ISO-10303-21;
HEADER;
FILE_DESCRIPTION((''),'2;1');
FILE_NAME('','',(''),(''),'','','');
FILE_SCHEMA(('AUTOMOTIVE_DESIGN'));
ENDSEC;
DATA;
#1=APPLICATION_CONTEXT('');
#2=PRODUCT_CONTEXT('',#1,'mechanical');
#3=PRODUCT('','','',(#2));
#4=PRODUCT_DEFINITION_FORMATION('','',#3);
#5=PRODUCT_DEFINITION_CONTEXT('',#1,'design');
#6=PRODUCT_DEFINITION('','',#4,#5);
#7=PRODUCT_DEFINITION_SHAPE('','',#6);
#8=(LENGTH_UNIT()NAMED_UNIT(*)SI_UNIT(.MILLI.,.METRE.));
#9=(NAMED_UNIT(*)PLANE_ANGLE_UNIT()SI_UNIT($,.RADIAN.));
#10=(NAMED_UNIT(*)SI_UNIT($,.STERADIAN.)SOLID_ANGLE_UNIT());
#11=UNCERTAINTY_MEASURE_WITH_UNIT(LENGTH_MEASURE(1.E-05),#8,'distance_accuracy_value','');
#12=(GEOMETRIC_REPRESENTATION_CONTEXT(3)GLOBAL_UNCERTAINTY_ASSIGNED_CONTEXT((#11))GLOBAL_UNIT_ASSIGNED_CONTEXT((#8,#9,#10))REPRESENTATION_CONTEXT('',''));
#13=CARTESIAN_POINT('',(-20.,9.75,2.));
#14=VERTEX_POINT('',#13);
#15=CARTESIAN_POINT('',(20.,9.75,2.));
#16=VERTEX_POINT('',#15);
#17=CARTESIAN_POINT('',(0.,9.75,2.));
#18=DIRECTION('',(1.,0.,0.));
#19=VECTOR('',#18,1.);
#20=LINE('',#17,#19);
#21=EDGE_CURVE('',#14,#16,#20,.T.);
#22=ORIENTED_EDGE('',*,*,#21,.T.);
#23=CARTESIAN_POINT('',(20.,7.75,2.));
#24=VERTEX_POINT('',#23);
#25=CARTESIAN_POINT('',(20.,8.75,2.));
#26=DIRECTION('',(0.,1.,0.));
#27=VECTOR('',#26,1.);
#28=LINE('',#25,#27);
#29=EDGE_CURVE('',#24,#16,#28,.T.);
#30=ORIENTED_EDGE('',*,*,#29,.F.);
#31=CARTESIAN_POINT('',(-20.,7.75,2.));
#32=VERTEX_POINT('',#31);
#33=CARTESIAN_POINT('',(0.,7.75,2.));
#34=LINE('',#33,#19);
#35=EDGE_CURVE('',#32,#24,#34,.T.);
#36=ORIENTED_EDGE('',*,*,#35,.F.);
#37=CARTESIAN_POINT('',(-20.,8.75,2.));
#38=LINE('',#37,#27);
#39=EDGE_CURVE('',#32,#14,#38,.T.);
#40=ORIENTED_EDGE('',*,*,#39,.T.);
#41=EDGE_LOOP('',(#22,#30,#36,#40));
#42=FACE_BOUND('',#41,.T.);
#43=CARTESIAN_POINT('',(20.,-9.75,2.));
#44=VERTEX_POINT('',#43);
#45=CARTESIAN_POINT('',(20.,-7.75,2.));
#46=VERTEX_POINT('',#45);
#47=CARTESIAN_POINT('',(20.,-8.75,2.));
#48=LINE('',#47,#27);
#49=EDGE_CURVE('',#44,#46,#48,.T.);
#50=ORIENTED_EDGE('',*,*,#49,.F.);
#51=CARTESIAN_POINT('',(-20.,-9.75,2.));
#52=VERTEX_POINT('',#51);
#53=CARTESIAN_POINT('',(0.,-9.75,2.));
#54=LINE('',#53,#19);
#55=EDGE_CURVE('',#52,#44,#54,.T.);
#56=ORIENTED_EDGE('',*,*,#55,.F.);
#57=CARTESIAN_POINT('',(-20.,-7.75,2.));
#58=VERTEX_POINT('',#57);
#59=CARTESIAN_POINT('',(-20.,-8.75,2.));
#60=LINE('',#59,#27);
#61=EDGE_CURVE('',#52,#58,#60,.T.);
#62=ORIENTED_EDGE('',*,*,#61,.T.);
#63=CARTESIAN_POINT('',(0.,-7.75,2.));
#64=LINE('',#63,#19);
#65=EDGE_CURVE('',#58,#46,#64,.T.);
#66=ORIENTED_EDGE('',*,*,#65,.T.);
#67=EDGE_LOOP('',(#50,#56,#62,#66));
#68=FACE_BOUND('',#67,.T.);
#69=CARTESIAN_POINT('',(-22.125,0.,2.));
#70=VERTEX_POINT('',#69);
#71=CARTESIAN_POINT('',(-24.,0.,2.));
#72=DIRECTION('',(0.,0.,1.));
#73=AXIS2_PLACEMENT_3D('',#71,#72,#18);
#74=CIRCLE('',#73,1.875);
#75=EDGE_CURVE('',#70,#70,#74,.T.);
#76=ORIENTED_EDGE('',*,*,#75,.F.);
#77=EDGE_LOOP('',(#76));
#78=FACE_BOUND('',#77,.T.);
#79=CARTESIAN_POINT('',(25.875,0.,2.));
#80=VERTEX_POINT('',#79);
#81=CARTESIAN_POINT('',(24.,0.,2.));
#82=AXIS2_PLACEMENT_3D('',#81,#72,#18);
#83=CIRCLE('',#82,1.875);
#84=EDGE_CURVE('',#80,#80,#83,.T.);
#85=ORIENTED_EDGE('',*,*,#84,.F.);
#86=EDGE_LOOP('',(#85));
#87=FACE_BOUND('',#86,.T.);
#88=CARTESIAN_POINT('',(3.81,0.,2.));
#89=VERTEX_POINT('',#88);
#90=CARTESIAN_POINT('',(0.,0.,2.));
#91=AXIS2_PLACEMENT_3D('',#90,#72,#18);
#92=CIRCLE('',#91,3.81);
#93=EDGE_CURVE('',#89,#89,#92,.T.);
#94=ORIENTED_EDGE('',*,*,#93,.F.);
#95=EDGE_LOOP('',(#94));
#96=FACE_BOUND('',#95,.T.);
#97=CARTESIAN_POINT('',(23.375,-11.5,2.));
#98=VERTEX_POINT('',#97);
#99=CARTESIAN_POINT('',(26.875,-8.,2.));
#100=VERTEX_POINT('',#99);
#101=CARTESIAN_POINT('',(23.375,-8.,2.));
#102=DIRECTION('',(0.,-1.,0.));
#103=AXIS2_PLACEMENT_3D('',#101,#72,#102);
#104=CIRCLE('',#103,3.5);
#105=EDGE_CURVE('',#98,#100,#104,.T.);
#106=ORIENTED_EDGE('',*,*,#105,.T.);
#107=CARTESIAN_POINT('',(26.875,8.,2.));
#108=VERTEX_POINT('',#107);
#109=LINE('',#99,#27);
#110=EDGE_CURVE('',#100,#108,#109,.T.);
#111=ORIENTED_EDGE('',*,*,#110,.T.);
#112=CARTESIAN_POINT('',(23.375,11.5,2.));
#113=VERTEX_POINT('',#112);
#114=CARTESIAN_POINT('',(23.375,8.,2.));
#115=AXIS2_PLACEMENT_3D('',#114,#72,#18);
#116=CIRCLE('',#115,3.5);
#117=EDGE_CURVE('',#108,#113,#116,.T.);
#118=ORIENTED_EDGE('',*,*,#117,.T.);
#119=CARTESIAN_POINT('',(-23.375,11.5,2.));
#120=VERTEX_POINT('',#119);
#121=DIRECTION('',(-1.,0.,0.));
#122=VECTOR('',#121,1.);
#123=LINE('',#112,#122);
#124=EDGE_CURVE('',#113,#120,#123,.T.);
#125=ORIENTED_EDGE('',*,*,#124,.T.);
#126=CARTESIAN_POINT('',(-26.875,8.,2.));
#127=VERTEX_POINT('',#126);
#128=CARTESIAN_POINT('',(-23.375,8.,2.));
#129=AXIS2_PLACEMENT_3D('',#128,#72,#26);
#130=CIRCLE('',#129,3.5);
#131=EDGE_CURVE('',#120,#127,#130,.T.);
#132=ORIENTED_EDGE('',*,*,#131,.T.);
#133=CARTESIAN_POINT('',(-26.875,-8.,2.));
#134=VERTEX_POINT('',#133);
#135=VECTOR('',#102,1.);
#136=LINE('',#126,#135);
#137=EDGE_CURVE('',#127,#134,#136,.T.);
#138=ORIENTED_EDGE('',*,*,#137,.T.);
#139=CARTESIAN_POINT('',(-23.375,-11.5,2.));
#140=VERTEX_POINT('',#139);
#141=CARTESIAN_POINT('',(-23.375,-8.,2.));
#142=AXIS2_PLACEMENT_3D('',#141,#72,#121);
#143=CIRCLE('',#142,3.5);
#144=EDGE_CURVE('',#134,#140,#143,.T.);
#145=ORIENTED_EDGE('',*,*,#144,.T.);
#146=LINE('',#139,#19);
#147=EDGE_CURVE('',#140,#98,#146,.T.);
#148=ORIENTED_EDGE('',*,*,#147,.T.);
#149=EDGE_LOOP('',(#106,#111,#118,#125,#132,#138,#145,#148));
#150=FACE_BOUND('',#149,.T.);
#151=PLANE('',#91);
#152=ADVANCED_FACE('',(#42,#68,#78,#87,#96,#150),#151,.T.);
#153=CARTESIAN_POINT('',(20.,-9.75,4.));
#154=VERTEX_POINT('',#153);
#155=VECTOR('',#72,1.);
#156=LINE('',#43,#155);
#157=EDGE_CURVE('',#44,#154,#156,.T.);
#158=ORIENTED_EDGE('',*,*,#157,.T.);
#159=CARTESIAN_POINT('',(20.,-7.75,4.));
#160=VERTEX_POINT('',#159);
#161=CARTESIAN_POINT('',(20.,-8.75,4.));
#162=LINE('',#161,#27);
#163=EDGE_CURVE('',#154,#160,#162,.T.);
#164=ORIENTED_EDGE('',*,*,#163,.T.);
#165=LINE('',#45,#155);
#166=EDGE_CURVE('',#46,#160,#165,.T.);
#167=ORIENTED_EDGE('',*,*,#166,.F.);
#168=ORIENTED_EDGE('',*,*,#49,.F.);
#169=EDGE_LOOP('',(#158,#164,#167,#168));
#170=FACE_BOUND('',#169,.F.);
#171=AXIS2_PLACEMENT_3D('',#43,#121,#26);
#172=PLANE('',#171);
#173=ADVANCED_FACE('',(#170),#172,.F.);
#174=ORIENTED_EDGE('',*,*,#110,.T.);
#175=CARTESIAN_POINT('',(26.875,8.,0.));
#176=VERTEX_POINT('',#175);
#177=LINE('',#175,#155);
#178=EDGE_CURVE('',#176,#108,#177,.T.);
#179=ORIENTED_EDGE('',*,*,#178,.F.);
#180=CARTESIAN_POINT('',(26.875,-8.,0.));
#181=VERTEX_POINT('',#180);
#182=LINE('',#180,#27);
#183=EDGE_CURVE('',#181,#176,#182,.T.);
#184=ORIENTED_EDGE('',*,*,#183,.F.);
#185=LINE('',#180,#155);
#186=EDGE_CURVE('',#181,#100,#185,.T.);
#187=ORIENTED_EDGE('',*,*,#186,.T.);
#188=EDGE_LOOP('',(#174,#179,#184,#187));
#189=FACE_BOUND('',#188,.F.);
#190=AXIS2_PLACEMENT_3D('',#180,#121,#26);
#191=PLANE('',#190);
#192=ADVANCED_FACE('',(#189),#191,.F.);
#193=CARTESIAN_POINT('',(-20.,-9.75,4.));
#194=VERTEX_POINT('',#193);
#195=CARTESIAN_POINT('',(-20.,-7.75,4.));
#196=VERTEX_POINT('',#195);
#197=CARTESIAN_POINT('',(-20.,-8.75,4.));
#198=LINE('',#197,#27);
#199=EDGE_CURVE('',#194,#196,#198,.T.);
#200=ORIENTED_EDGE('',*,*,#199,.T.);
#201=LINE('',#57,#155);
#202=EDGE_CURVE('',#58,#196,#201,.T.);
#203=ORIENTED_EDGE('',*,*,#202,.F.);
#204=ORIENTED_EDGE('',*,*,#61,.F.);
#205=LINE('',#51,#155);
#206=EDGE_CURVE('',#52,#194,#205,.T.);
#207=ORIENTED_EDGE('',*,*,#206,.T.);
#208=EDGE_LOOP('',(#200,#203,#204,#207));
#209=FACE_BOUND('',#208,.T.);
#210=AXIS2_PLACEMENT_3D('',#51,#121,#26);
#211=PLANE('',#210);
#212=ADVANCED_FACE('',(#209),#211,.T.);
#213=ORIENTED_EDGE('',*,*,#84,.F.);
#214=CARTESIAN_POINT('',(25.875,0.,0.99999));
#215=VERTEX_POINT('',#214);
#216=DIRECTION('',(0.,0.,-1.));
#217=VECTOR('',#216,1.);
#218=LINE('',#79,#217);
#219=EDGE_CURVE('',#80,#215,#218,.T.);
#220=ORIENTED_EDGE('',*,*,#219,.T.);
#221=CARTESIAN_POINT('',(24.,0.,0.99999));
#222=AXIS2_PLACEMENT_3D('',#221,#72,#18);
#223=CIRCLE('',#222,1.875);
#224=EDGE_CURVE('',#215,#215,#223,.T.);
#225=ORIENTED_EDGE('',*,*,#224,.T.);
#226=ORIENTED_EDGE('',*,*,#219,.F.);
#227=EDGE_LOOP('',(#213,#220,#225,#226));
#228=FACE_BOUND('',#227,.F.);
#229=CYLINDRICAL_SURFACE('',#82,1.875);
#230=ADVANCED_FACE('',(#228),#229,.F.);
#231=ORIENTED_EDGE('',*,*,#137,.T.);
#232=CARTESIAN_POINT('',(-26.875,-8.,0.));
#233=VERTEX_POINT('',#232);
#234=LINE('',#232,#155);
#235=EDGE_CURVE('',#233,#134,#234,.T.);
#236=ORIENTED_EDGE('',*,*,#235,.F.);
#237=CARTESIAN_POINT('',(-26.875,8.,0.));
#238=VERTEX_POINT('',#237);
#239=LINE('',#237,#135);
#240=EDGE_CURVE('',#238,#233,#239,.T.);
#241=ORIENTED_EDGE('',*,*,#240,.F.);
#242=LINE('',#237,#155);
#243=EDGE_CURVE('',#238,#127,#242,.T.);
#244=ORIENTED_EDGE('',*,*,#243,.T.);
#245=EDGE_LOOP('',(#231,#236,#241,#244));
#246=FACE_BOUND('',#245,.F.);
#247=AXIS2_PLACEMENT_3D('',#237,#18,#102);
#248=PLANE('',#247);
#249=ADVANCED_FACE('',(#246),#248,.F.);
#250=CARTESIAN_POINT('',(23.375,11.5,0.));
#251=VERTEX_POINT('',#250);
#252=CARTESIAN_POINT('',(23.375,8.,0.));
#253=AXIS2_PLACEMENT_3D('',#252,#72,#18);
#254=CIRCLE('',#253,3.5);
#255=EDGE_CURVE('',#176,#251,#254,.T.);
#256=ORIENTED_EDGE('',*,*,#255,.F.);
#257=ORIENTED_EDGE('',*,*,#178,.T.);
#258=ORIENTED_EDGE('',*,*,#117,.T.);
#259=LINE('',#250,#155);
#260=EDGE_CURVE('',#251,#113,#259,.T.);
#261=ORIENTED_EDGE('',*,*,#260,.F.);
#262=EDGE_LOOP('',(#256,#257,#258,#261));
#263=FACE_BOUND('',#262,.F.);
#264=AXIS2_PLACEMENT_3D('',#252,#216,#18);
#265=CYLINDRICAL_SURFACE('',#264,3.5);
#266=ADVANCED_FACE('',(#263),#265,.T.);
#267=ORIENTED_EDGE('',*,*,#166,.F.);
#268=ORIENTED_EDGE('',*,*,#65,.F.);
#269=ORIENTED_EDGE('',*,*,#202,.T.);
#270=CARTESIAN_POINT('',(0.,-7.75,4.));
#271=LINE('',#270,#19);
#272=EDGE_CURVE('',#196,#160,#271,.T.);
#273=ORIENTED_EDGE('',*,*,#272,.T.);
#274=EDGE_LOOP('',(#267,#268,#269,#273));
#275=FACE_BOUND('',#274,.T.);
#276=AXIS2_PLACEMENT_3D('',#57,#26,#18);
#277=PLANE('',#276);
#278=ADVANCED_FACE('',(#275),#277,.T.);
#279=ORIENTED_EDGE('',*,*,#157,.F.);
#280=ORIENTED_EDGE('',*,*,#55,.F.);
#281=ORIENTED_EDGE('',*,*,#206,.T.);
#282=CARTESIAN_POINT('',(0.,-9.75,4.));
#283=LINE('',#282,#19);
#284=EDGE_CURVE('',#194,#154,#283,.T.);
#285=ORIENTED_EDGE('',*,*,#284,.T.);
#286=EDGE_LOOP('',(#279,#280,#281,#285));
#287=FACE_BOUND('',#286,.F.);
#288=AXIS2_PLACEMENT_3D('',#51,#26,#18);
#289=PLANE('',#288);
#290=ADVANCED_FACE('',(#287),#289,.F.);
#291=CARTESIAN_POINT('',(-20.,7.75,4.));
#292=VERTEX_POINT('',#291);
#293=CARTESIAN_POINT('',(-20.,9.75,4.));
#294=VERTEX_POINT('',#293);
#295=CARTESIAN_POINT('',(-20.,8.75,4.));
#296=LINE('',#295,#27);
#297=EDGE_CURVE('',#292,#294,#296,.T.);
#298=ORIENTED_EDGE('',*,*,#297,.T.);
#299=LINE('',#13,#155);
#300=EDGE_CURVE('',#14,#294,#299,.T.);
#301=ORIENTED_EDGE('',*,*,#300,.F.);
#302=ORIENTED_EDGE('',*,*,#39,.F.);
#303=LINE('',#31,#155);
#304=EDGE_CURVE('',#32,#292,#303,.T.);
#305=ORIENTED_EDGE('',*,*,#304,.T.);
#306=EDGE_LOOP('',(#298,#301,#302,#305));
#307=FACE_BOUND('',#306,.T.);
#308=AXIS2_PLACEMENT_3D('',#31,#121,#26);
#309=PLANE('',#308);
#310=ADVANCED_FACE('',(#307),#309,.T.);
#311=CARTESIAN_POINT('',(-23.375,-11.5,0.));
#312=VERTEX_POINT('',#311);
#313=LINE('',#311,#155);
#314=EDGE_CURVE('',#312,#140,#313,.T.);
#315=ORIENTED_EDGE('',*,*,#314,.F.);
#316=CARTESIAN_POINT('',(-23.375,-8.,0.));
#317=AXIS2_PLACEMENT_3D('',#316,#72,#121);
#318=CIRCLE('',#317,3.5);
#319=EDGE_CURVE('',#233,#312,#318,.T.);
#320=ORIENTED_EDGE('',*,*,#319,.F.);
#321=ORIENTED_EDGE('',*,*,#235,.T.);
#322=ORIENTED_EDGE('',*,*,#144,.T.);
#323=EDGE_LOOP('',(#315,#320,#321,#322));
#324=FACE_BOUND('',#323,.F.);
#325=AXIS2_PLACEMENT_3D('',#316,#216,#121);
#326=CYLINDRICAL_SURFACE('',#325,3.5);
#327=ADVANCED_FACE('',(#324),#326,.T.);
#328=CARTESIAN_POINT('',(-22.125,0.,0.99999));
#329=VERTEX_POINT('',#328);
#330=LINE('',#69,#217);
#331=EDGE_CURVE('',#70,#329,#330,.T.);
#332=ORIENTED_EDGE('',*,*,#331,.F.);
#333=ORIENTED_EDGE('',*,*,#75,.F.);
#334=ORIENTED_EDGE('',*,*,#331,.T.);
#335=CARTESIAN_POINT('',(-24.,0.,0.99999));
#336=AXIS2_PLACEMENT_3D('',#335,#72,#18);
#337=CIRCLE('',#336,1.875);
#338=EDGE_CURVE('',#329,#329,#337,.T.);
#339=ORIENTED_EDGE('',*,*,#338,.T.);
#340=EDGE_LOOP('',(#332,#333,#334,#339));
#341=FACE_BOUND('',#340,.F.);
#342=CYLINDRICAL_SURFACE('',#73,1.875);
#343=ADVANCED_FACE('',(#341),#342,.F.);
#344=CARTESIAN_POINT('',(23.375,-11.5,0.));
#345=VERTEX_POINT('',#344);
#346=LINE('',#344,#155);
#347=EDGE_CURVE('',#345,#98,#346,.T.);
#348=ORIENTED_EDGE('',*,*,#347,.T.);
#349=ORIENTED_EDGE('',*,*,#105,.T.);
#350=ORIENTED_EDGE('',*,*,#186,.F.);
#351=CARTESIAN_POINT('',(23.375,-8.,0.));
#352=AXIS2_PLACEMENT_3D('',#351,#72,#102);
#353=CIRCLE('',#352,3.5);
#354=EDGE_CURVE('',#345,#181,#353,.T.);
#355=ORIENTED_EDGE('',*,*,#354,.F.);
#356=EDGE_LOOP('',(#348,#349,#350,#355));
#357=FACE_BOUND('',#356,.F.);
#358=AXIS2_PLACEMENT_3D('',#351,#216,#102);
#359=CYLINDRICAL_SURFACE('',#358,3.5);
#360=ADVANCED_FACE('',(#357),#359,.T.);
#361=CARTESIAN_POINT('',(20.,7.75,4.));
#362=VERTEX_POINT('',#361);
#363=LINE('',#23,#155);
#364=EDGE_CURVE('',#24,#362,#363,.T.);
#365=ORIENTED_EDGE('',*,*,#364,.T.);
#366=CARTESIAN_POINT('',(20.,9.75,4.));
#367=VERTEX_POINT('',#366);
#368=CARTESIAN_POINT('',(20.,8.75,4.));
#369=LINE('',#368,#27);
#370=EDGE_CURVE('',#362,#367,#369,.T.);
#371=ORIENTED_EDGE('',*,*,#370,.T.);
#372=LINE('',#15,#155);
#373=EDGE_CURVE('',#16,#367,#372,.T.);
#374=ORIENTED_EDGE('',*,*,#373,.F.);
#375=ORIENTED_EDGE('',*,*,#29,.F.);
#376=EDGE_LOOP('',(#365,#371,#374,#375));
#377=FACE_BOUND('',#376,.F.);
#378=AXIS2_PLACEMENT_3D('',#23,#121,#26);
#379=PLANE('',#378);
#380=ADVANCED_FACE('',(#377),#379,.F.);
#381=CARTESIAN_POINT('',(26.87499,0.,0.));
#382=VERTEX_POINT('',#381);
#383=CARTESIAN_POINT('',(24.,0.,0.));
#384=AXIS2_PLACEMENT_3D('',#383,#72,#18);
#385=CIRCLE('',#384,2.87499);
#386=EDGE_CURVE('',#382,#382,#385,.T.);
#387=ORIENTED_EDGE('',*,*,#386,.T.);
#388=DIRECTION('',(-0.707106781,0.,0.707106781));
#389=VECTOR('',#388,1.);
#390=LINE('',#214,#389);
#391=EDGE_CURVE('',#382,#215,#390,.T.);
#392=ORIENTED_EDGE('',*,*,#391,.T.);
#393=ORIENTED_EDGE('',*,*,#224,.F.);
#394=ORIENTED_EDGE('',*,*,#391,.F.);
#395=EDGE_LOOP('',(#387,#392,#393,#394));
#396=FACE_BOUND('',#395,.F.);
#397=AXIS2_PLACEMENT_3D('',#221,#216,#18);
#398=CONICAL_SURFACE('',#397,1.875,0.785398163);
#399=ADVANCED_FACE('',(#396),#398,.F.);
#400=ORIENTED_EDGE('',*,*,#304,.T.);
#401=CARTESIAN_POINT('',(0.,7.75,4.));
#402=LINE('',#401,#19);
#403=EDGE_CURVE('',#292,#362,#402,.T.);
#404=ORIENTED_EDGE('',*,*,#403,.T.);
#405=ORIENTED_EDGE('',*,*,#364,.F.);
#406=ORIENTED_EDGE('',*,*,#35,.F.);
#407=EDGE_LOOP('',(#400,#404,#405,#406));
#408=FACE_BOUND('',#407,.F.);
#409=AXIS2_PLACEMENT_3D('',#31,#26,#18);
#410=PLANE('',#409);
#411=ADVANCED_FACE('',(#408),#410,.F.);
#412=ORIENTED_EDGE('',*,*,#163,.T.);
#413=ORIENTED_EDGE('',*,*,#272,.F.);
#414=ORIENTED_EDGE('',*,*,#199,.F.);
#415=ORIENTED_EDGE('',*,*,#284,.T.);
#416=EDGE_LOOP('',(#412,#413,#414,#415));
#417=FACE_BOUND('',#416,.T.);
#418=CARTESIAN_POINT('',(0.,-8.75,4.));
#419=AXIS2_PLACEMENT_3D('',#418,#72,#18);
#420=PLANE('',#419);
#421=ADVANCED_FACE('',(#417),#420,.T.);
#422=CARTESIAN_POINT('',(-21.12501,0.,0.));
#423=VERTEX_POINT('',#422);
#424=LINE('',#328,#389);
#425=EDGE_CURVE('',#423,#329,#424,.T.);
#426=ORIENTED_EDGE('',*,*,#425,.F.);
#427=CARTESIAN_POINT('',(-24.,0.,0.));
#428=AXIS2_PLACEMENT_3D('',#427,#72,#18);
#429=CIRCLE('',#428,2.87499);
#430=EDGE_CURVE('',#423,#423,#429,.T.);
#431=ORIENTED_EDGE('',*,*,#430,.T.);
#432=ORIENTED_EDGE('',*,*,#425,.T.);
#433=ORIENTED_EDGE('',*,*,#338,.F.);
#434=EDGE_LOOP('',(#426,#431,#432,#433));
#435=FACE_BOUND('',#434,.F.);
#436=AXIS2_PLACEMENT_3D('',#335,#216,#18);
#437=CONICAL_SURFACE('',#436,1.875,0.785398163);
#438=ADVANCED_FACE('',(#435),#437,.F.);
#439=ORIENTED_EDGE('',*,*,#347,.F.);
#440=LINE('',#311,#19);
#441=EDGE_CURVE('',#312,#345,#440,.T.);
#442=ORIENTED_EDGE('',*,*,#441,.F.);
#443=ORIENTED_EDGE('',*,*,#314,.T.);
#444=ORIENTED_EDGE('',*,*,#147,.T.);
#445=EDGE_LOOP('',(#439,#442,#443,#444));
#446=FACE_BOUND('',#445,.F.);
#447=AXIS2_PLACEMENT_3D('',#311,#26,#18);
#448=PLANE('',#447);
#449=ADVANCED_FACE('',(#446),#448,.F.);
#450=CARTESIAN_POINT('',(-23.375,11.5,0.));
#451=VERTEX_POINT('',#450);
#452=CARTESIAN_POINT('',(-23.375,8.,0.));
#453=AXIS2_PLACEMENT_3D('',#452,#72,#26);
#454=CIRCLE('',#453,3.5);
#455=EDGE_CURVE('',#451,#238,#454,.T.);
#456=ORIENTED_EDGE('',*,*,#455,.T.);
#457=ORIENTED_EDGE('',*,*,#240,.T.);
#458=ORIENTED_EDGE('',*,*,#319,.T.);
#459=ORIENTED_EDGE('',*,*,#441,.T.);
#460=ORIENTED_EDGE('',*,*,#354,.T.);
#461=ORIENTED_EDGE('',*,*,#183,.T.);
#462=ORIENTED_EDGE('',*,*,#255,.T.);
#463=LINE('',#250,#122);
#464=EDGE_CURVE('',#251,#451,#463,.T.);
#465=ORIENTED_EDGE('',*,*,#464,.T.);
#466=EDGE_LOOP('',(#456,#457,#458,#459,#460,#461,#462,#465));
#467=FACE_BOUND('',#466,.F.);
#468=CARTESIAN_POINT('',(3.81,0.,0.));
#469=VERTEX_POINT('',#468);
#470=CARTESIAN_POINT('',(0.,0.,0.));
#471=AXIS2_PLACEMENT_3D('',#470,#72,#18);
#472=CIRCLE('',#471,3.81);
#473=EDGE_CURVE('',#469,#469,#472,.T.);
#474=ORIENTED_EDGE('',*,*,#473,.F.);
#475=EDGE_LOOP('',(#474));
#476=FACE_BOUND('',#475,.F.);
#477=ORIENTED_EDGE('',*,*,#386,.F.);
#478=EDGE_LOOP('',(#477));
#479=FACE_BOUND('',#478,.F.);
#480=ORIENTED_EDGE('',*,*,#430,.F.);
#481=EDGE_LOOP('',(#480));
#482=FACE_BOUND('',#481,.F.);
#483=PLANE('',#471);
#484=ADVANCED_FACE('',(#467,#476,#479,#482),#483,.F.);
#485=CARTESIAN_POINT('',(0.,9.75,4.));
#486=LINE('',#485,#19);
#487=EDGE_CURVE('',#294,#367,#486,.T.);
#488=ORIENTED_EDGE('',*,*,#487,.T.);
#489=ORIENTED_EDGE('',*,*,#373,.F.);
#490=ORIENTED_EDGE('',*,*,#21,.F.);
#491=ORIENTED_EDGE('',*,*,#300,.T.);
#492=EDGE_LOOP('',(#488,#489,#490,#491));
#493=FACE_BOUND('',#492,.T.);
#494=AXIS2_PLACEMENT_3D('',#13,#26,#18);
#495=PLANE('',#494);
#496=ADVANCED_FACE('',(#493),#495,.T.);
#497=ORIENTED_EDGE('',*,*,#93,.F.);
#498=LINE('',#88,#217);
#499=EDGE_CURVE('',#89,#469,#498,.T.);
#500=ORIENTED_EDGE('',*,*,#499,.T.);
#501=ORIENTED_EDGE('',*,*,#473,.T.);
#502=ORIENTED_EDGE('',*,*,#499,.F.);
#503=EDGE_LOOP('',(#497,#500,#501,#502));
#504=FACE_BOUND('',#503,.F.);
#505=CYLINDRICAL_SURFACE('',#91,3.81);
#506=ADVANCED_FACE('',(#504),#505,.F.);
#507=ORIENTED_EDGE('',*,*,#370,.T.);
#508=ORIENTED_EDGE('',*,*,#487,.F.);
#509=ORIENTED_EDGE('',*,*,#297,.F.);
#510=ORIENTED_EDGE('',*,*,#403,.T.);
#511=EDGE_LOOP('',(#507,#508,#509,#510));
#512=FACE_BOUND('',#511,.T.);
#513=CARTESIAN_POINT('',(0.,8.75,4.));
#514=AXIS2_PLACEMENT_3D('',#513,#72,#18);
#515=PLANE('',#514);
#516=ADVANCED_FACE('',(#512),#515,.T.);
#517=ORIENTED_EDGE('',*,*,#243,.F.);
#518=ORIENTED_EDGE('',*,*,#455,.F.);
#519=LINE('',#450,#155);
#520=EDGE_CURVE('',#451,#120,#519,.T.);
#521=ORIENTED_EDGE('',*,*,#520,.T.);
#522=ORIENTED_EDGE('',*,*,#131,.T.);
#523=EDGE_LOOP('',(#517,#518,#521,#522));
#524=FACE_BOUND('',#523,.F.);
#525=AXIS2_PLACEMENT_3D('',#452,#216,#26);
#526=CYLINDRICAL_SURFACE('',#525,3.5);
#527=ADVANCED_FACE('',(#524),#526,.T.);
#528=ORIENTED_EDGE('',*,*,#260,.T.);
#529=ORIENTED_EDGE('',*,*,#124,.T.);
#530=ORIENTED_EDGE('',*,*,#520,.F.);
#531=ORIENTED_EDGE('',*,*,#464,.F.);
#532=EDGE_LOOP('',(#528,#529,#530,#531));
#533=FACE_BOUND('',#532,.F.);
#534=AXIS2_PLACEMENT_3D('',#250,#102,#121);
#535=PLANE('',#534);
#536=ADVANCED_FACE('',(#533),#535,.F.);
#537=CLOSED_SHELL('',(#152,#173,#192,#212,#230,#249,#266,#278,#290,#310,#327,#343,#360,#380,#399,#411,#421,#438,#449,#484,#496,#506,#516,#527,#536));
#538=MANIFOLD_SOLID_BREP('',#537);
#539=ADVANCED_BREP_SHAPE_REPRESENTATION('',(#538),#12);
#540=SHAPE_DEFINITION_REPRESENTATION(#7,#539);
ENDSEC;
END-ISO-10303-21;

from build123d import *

# Parameters (mm, degrees)
F1_DEPTH = 2
F2_R     = 1.875
F3_DEPTH = 2.001
F4_SIZE  = 0.99999
F5_W     = 40
F5_H     = 2
F6_DEPTH = 2
F7_R     = 3.81
F8_DEPTH = 2.001


# Not quite as in the source:
# - a fillet or chamfer is up to 0.001 mm smaller than in the source, because OpenCascade refuses the exact size


with BuildPart() as f1:
    # F0 (on Top) → F1 (new body)
    with BuildSketch(Plane.XY):
        with BuildLine():
            ThreePointArc((26.875, 8), (25.8498737342, 10.4748737342), (23.375, 11.5))
            Line((23.375, 11.5), (-23.375, 11.5))
            ThreePointArc((-23.375, 11.5), (-25.8498737342, 10.4748737342), (-26.875, 8))
            Line((-26.875, 8), (-26.875, -8))
            ThreePointArc((-26.875, -8), (-25.8498737342, -10.4748737342), (-23.375, -11.5))
            Line((-23.375, -11.5), (23.375, -11.5))
            ThreePointArc((23.375, -11.5), (25.8498737342, -10.4748737342), (26.875, -8))
            Line((26.875, -8), (26.875, 8))
        make_face()
    extrude(amount=F1_DEPTH)

    # F2 (on face) → F3 (cut, through all)
    with BuildSketch(Plane.XY.offset(2)):
        with Locations((-24, 0)):
            Circle(F2_R)
        with Locations((24, 0)):
            Circle(F2_R)
    extrude(amount=-F3_DEPTH, mode=Mode.SUBTRACT)

    # F4 (size 1 in the source; OpenCascade refuses exactly that, so slightly less here)
    f4_edges = [f1.edges().sort_by_distance(p)[0] for p in [
        (-25.875, 0, 0),
        (22.125, 0, 0),
    ]]
    chamfer(f4_edges, length=F4_SIZE)

    # F5 (on face) → F6 (join)
    with BuildSketch(Plane.XY.offset(2)):
        with Locations((0, 8.75)):
            Rectangle(F5_W, F5_H)
        with Locations((0, -8.75)):
            Rectangle(F5_W, F5_H)
    extrude(amount=F6_DEPTH)

    # F7 (on face) → F8 (cut, through all)
    with BuildSketch(Plane.XY.offset(2)):
        Circle(F7_R)
    extrude(amount=-F8_DEPTH, mode=Mode.SUBTRACT)


solid = f1.part
